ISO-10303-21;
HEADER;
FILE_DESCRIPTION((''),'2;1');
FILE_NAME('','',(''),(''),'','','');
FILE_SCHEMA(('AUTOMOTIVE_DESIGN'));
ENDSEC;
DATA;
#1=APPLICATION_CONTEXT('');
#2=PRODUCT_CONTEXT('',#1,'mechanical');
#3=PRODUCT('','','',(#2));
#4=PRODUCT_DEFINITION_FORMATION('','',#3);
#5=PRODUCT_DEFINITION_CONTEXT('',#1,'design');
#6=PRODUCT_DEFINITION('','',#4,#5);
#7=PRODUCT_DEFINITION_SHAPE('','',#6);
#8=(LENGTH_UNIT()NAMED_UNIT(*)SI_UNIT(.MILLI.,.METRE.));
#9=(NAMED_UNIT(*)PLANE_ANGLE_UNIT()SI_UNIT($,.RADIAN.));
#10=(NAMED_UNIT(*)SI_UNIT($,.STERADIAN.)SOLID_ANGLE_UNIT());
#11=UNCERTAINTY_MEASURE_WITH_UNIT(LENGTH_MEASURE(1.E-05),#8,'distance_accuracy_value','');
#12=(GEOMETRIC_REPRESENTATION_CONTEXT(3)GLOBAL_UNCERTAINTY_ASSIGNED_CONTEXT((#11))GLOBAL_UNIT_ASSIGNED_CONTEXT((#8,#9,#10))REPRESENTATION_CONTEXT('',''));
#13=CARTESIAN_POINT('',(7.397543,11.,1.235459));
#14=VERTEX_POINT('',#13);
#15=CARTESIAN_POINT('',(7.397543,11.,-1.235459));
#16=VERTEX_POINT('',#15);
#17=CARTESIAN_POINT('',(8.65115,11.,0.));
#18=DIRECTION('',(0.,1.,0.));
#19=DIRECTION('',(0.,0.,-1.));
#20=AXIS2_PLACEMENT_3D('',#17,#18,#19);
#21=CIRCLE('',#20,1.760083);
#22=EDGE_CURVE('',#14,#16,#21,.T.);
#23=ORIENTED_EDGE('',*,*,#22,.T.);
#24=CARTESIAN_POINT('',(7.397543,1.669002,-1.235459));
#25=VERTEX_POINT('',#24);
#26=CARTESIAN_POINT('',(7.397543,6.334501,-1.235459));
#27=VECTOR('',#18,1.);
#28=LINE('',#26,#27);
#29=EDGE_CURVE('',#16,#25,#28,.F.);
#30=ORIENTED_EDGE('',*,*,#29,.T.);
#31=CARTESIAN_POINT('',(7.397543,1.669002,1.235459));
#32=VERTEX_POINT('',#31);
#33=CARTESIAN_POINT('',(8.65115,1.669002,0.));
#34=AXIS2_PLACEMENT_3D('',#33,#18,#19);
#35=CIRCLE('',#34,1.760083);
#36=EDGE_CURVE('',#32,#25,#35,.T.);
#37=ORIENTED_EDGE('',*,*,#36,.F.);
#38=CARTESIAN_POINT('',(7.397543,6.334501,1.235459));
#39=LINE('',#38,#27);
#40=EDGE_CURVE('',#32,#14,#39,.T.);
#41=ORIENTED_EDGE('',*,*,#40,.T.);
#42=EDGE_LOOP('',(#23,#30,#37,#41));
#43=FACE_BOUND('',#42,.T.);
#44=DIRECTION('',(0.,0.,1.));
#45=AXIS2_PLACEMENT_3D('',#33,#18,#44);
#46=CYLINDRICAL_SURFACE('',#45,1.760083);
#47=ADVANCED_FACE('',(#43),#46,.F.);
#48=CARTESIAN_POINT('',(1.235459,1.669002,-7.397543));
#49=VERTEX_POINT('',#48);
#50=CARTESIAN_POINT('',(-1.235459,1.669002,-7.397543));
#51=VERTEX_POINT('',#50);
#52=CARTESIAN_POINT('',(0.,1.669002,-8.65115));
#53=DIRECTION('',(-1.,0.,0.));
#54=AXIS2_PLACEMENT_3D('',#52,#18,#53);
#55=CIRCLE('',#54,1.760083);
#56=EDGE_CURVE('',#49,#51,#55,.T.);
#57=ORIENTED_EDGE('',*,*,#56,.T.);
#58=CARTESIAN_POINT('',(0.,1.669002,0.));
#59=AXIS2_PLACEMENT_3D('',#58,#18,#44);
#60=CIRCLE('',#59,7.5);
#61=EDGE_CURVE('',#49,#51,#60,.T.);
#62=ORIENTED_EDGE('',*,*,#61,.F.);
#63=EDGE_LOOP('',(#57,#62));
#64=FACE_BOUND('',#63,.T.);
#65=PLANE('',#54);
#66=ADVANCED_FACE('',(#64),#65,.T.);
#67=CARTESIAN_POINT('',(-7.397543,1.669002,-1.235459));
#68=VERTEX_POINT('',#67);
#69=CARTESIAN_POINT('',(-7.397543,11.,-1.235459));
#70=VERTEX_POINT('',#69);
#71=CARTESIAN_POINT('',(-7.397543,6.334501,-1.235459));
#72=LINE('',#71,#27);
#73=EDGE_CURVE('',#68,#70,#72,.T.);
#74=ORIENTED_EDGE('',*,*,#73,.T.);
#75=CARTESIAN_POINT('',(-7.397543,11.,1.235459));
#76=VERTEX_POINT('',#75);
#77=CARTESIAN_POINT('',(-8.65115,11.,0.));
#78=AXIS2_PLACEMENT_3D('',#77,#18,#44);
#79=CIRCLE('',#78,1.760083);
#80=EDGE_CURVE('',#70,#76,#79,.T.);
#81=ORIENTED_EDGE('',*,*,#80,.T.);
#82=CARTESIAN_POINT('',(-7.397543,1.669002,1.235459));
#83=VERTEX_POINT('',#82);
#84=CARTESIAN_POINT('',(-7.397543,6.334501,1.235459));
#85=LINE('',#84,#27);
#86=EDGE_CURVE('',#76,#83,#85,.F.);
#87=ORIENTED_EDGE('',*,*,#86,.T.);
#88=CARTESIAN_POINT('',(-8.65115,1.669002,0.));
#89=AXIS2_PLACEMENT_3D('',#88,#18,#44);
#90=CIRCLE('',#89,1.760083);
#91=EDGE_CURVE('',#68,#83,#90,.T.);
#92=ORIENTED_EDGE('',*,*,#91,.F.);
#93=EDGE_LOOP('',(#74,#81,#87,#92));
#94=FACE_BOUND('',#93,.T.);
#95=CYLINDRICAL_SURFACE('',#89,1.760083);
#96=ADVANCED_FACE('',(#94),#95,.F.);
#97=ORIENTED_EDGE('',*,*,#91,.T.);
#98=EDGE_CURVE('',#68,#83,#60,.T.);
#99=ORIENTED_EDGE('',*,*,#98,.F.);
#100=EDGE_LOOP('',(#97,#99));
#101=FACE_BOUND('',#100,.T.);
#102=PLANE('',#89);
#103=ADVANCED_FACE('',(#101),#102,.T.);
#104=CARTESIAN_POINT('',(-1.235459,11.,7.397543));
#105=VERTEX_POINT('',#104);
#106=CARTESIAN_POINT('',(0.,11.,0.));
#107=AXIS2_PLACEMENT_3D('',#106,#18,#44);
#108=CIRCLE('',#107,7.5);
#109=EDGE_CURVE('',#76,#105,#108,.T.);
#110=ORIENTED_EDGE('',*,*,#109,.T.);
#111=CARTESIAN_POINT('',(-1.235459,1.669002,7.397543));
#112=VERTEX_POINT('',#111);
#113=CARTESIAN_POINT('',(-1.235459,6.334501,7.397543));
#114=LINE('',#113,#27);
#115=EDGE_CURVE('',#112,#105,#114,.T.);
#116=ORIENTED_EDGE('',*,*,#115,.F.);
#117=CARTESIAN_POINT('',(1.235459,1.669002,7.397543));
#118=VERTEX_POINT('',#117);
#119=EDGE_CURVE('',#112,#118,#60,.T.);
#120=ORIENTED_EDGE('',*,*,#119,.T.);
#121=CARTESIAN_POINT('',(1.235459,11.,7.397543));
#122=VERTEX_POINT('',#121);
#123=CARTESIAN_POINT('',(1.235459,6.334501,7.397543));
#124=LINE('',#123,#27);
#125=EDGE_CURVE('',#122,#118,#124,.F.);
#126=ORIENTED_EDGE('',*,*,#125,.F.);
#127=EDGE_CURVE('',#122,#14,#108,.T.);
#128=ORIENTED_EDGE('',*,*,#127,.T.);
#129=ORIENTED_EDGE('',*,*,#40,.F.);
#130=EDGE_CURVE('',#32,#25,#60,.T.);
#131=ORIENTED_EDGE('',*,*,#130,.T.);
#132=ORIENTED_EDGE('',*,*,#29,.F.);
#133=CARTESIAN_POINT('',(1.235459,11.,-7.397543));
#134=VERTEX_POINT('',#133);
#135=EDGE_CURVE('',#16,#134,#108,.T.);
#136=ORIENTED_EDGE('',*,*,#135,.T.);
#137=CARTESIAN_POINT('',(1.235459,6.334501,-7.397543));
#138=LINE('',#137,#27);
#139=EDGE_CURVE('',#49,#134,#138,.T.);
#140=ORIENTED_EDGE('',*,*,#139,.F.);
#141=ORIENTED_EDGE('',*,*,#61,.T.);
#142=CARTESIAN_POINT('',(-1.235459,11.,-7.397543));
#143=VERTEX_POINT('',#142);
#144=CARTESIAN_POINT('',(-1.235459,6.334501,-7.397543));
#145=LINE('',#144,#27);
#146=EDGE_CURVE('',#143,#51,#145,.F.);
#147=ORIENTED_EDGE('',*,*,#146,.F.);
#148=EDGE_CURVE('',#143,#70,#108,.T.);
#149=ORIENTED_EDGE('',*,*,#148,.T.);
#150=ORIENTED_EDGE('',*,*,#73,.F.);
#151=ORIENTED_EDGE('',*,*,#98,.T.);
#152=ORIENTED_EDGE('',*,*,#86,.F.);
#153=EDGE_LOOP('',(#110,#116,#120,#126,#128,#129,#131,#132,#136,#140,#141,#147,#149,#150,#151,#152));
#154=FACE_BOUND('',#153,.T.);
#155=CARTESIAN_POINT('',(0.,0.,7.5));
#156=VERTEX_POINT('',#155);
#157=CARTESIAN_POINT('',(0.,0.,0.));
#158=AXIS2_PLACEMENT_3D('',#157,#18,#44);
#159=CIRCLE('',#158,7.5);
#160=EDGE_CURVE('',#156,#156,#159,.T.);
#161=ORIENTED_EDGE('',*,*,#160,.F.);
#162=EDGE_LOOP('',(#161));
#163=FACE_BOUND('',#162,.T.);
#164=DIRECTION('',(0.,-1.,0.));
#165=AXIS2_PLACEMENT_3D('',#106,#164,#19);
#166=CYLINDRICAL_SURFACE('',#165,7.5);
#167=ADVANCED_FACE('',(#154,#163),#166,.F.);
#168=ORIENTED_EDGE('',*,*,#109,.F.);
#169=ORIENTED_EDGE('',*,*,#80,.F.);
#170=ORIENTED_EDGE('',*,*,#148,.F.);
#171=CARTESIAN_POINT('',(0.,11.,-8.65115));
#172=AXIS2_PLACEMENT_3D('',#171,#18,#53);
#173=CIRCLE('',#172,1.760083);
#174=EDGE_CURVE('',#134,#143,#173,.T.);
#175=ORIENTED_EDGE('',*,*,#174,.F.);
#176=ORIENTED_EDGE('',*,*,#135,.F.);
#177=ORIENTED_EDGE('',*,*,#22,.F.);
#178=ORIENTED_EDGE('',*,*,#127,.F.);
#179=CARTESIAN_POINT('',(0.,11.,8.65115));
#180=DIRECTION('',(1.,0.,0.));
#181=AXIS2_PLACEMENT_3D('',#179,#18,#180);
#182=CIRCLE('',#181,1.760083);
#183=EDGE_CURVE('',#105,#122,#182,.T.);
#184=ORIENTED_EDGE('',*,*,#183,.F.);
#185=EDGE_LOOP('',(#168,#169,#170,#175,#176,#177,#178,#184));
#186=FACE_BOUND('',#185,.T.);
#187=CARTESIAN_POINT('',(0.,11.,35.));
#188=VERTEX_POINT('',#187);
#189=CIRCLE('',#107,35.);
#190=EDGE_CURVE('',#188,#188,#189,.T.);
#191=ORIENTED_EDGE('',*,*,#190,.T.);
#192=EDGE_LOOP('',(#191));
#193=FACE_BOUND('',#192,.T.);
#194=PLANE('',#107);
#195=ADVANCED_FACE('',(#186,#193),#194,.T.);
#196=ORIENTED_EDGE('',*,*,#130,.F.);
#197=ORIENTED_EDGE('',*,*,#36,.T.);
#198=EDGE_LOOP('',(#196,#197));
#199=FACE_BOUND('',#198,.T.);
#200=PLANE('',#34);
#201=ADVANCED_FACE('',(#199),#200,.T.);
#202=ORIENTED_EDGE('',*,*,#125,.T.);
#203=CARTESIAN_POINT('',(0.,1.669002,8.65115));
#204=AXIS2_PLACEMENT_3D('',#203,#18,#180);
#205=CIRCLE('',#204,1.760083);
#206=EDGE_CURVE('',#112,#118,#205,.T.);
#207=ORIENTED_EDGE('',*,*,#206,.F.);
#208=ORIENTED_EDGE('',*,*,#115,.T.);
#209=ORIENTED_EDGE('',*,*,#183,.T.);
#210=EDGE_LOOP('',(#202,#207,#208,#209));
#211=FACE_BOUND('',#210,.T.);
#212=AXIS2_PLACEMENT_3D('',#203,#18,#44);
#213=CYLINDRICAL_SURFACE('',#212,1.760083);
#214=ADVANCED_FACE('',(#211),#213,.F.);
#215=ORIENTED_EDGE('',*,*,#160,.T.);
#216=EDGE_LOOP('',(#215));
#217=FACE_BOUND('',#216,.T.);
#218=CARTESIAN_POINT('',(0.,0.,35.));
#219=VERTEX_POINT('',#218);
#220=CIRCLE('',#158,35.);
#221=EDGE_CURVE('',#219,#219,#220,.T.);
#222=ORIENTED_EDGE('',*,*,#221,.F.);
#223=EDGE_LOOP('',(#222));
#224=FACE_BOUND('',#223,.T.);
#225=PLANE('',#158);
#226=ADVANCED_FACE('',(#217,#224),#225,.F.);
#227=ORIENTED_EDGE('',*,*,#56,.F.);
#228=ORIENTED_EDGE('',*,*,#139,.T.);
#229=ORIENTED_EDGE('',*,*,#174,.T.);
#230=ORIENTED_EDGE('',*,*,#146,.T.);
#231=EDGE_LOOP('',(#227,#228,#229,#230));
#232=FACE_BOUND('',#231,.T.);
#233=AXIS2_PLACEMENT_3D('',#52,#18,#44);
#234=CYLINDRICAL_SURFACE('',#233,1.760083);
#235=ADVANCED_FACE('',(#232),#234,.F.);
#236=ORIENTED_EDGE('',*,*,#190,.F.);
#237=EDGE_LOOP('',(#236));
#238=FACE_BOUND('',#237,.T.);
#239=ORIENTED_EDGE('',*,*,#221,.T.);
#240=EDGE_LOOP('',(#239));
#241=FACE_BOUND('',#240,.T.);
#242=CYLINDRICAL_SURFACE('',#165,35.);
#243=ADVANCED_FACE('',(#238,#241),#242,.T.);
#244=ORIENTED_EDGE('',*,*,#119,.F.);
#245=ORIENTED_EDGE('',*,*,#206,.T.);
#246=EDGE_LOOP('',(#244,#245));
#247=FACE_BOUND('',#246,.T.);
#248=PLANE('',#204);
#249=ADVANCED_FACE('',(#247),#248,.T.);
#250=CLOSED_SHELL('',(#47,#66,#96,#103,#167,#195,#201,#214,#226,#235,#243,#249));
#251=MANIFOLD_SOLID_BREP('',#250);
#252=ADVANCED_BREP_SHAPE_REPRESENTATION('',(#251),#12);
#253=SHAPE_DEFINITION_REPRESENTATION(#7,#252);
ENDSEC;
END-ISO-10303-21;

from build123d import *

# Parameters (mm, degrees)
SKETCH1_R           = 35
BOSS_EXTRUDE1_DEPTH = 11
SKETCH2_R           = 7.5
CUT_EXTRUDE1_DEPTH  = 51.705029336
SKETCH3_R           = 1.760082553
CUT_EXTRUDE2_DEPTH  = 9.330998048
CIRPATTERN1_COUNT   = 4


with BuildPart() as part:
    # Sketch1 → Boss-Extrude1 (new body)
    with BuildSketch(Plane(origin=(0, 0, 0), x_dir=(1, 0, 0), z_dir=(0, 1, 0))):
        Circle(SKETCH1_R)
    extrude(amount=BOSS_EXTRUDE1_DEPTH)

    # Sketch2 → Cut-Extrude1 (cut, through all)
    with BuildSketch(Plane(origin=(0, 0, 0), x_dir=(1, 0, 0), z_dir=(0, 1, 0))):
        Circle(SKETCH2_R)
    extrude(amount=CUT_EXTRUDE1_DEPTH, mode=Mode.SUBTRACT)

    # Sketch3 → Cut-Extrude2 (cut)
    with BuildSketch(Plane(origin=(0, 11, 0), x_dir=(1, 0, 0), z_dir=(0, 1, 0))):
        with Locations((-8.651150233, 0)):
            Circle(SKETCH3_R)
    cut_extrude2 = extrude(amount=-CUT_EXTRUDE2_DEPTH, mode=Mode.SUBTRACT)

    # CirPattern1: Cut-Extrude2 ×4 about axis
    cirpattern1_axis = Axis((0, 0, 0), (0, 1, 0))
    for i in range(1, CIRPATTERN1_COUNT):
        add(cut_extrude2.rotate(cirpattern1_axis, i * 360 / CIRPATTERN1_COUNT), mode=Mode.SUBTRACT)


solid = part.part
